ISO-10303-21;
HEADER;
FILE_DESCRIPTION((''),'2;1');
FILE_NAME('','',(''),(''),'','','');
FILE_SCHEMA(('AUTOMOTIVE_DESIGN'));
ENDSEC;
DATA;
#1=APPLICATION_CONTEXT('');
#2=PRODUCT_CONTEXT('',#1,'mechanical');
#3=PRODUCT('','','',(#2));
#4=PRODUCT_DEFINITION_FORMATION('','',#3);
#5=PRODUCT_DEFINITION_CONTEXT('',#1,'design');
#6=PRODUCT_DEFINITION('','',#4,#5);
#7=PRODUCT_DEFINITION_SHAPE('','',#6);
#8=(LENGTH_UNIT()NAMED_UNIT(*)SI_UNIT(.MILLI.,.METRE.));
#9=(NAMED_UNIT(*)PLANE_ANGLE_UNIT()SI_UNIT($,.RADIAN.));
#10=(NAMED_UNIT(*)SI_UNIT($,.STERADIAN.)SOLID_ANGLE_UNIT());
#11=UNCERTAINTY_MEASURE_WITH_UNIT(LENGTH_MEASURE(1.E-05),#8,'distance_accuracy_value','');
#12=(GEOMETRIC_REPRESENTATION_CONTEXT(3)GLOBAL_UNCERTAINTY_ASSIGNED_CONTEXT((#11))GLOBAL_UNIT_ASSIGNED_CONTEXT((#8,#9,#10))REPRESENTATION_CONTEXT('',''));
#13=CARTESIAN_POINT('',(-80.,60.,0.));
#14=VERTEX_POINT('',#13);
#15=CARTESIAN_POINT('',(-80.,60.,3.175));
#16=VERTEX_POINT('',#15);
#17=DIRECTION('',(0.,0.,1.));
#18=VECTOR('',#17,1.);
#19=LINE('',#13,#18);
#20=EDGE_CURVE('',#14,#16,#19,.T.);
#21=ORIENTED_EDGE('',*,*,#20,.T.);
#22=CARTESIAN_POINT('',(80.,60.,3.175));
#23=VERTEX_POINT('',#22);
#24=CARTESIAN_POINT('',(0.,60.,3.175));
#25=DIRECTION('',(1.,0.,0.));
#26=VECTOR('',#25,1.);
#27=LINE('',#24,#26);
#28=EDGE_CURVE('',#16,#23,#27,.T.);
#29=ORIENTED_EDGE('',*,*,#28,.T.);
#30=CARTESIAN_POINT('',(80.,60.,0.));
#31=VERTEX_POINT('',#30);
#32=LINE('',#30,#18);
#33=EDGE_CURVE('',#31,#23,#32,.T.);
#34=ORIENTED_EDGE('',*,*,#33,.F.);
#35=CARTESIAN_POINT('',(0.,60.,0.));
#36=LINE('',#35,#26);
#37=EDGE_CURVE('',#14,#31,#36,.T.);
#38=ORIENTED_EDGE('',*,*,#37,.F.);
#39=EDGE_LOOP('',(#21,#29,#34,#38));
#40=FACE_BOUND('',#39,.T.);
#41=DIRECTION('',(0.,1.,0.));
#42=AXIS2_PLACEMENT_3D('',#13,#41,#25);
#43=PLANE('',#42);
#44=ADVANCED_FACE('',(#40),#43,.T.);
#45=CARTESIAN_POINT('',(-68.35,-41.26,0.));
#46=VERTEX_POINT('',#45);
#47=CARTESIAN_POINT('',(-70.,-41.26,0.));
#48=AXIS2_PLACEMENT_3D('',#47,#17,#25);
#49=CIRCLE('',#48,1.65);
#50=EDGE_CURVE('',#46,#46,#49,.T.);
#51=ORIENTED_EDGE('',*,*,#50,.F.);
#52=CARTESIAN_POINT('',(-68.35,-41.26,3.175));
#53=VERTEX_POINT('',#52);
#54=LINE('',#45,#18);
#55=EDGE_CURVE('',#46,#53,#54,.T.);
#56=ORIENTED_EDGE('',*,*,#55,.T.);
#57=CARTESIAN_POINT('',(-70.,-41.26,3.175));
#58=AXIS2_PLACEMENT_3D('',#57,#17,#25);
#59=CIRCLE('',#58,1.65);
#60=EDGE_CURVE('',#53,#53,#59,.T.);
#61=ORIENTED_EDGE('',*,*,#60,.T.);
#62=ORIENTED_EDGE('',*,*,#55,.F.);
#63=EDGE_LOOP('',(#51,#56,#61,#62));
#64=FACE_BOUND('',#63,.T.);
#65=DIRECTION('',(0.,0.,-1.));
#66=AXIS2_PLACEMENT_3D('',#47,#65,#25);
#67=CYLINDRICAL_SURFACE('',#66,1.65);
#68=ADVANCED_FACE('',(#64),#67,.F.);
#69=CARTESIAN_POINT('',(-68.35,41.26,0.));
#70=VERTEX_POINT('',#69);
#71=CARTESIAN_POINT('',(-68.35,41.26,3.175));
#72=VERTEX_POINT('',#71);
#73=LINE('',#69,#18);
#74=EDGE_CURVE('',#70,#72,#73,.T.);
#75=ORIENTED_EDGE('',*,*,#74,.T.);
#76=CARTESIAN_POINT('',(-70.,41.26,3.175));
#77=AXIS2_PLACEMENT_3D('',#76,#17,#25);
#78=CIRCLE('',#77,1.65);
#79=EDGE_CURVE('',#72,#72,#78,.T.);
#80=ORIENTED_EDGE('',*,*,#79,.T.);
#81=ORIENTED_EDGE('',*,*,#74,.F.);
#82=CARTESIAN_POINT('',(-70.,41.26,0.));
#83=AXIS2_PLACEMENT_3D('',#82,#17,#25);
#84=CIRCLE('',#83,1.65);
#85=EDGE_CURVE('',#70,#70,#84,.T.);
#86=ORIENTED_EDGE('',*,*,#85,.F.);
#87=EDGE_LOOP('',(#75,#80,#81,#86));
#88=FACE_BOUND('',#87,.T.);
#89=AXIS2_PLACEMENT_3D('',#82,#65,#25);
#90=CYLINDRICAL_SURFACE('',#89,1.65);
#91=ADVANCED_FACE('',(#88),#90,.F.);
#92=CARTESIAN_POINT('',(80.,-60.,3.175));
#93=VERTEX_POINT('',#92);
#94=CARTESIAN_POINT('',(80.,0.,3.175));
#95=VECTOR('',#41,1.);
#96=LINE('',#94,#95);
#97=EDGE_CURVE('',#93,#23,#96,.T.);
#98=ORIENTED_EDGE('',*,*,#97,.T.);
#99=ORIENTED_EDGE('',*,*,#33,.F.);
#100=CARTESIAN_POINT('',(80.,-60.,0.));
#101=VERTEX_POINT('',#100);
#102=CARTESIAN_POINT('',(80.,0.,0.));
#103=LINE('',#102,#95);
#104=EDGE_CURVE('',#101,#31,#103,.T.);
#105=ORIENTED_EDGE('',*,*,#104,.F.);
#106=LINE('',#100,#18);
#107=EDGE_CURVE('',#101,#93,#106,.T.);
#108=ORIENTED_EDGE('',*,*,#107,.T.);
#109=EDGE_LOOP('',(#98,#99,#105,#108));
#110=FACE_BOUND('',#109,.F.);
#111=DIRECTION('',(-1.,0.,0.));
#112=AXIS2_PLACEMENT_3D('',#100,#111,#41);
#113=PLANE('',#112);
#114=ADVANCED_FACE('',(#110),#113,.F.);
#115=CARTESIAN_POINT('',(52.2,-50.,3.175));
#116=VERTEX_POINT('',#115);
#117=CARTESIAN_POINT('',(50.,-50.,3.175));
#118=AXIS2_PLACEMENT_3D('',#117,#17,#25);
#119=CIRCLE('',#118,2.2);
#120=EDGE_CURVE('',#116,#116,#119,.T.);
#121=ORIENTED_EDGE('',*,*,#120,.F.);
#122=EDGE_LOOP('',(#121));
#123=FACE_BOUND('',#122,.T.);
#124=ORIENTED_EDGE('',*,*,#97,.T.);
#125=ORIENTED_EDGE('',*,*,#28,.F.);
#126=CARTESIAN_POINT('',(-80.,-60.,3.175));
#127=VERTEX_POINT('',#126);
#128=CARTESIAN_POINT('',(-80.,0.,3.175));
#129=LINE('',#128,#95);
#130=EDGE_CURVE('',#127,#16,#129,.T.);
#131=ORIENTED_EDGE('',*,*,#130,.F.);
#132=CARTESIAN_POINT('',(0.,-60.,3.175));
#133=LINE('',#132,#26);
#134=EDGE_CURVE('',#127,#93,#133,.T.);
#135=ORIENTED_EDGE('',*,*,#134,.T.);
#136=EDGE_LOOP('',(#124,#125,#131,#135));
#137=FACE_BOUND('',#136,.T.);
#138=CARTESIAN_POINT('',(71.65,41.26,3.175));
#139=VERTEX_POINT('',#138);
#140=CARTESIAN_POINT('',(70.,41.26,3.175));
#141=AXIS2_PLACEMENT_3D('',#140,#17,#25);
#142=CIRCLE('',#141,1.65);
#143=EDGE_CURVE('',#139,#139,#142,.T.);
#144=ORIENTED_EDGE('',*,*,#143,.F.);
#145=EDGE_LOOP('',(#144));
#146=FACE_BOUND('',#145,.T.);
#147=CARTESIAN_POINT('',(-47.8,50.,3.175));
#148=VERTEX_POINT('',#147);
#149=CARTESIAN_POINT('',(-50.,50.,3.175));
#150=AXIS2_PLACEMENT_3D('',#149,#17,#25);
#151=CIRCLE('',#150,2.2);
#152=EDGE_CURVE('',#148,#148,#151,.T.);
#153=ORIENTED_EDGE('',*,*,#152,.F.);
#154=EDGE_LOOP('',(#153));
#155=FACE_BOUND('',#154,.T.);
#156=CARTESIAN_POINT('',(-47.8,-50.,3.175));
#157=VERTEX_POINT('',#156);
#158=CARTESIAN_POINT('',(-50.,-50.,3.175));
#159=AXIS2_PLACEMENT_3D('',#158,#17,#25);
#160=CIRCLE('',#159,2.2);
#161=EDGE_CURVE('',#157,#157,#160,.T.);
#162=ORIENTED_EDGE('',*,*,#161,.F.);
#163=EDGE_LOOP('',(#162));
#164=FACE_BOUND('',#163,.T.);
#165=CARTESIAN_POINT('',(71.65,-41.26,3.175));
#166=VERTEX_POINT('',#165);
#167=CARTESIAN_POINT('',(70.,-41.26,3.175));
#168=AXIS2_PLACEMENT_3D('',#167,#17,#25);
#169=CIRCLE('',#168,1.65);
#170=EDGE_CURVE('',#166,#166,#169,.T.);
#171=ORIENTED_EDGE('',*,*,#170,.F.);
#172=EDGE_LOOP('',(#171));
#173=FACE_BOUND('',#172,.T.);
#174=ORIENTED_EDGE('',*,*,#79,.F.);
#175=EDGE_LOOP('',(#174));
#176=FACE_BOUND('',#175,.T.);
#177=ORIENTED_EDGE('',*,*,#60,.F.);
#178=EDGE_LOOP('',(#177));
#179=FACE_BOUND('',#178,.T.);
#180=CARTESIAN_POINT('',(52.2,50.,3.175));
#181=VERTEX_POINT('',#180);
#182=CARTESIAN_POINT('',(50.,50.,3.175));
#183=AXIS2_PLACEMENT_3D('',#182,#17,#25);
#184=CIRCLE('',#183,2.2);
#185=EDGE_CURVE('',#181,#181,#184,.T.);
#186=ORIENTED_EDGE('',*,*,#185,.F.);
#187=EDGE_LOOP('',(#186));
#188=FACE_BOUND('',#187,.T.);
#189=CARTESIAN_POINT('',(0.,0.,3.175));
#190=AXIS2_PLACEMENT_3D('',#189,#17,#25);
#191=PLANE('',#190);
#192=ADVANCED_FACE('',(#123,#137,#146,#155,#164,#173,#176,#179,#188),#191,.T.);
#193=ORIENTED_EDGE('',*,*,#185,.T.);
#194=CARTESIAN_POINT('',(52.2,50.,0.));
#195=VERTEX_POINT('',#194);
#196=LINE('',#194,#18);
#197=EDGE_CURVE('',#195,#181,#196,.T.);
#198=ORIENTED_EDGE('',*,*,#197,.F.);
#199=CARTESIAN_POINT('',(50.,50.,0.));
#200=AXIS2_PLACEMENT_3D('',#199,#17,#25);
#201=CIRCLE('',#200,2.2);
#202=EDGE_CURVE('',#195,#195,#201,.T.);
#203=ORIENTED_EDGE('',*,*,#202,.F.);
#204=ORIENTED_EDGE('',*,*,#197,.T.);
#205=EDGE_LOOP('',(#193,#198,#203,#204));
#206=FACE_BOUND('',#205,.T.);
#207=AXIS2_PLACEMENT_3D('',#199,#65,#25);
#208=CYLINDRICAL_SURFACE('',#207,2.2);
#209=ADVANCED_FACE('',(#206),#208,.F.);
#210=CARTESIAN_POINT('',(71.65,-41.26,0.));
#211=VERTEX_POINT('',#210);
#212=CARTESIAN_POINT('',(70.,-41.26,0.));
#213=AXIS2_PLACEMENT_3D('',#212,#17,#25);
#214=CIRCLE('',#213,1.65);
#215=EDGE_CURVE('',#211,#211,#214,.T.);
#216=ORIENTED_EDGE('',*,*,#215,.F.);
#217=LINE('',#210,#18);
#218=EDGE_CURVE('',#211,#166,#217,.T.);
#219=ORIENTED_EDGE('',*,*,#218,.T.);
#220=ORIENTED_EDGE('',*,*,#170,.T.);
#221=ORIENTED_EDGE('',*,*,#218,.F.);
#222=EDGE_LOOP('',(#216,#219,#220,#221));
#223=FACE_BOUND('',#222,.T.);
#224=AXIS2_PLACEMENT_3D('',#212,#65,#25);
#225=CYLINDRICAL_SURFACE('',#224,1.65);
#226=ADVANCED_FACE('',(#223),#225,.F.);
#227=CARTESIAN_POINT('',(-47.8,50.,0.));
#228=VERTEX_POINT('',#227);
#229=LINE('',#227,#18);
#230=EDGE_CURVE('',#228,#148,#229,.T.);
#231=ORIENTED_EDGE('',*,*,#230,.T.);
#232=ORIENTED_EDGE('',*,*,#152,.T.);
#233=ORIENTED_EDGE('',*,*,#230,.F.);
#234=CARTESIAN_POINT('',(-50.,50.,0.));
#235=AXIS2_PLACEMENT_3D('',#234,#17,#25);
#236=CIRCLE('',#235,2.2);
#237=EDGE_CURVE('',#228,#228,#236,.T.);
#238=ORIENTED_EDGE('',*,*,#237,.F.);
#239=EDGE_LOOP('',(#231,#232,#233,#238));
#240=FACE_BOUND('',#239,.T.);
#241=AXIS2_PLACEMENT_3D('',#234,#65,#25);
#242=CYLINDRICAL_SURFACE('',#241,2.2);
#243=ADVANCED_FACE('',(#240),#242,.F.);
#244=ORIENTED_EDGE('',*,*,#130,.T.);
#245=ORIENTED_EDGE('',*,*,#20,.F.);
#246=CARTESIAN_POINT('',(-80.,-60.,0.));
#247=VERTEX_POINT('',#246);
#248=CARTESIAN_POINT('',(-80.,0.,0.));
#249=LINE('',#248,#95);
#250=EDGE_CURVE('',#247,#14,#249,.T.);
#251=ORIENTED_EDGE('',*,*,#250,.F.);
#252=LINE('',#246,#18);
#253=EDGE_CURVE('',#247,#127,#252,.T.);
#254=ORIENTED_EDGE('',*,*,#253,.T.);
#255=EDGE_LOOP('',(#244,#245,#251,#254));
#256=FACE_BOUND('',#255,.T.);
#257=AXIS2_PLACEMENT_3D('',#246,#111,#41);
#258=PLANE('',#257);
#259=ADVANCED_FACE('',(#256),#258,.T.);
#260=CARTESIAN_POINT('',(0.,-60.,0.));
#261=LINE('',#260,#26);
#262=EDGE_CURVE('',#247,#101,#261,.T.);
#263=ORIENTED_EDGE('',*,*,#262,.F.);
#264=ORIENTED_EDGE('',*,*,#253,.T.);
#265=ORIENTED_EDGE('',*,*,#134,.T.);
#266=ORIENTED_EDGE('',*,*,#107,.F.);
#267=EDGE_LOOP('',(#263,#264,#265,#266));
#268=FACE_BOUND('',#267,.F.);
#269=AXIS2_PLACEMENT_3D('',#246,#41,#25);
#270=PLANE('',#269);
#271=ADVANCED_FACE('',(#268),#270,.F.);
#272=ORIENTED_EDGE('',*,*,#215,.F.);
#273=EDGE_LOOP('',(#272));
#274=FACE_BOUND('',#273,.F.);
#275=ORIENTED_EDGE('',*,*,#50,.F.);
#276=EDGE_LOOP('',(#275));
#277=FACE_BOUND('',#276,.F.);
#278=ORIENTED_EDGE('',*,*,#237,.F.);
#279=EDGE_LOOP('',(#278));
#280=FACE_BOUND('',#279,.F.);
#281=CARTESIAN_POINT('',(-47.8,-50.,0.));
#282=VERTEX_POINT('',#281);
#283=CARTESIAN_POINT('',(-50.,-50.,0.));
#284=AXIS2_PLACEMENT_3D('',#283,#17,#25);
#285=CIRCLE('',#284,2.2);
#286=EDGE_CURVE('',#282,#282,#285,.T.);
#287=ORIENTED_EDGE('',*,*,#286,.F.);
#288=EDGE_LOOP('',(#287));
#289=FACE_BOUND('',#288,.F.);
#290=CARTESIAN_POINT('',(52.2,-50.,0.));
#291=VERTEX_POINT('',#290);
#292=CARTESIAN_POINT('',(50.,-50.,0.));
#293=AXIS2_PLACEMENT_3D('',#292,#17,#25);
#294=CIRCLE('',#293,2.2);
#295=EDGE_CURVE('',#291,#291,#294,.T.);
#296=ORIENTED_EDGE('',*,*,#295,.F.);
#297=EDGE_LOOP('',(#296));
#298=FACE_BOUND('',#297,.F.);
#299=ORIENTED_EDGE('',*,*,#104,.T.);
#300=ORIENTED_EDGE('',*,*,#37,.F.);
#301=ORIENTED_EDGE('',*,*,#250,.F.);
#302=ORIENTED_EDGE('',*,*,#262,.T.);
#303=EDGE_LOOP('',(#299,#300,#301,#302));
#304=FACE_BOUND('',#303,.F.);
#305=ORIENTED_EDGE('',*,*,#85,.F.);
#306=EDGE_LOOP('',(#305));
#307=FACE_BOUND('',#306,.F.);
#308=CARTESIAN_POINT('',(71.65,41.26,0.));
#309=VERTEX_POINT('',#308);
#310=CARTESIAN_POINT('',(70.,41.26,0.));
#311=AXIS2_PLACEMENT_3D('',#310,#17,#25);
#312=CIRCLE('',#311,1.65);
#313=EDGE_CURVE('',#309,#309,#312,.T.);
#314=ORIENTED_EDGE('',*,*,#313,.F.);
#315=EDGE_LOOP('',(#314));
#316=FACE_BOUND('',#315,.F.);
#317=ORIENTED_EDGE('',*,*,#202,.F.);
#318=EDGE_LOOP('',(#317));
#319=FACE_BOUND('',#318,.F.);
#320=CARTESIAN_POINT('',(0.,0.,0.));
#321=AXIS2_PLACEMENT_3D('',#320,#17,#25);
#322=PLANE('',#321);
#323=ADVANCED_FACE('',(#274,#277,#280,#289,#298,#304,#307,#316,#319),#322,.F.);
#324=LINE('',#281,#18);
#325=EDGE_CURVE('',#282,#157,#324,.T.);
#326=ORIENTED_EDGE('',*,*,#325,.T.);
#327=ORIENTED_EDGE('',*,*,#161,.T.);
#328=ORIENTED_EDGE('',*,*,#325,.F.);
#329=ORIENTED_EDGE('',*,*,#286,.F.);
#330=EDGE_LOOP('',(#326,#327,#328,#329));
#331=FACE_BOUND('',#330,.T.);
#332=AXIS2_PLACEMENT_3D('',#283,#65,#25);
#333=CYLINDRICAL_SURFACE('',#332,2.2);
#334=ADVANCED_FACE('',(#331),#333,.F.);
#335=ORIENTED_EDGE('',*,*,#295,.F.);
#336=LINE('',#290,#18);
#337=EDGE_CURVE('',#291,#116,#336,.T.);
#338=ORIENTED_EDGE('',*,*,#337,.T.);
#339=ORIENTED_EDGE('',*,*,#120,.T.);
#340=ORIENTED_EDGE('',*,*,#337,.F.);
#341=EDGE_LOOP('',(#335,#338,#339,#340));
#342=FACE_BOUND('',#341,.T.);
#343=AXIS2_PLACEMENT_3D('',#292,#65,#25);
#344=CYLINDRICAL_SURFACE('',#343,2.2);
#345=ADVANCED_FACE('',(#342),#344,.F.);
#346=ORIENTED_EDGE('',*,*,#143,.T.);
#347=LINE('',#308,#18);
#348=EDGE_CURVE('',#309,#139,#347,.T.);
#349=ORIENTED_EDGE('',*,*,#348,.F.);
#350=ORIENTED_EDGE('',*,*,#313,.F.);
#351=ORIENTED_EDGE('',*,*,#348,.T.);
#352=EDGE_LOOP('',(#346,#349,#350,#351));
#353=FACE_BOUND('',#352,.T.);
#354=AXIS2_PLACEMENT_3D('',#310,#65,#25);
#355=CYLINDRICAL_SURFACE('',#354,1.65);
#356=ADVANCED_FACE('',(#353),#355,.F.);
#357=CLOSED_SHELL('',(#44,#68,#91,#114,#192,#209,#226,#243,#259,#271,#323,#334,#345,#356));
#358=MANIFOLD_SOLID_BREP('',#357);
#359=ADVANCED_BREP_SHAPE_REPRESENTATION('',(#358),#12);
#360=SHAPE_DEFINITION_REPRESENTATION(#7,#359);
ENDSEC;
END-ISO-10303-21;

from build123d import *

# Parameters (mm, degrees)
F0_W     = 160
F0_H     = 120
F0_R     = 2.2
F0_R_2   = 1.65
F1_DEPTH = 3.175


# Not quite as in the source:
# - a length typed as a fraction of an inch, garbled in the dataset ("3 / 203.2 mm" for 3/8 in), is restored


with BuildPart() as f1:
    # F0 (on Top) → F1 (new body)
    with BuildSketch(Plane.XY):
        Rectangle(F0_W, F0_H)
        with Locations((-50, -50)):
            Circle(F0_R, mode=Mode.SUBTRACT)
        with Locations((-70, -41.26)):
            Circle(F0_R_2, mode=Mode.SUBTRACT)
        with Locations((50, -50)):
            Circle(F0_R, mode=Mode.SUBTRACT)
        with Locations((70, -41.26)):
            Circle(F0_R_2, mode=Mode.SUBTRACT)
        with Locations((-70, 41.26)):
            Circle(F0_R_2, mode=Mode.SUBTRACT)
        with Locations((-50, 50)):
            Circle(F0_R, mode=Mode.SUBTRACT)
        with Locations((70, 41.26)):
            Circle(F0_R_2, mode=Mode.SUBTRACT)
        with Locations((50, 50)):
            Circle(F0_R, mode=Mode.SUBTRACT)
    extrude(amount=F1_DEPTH)


solid = f1.part
